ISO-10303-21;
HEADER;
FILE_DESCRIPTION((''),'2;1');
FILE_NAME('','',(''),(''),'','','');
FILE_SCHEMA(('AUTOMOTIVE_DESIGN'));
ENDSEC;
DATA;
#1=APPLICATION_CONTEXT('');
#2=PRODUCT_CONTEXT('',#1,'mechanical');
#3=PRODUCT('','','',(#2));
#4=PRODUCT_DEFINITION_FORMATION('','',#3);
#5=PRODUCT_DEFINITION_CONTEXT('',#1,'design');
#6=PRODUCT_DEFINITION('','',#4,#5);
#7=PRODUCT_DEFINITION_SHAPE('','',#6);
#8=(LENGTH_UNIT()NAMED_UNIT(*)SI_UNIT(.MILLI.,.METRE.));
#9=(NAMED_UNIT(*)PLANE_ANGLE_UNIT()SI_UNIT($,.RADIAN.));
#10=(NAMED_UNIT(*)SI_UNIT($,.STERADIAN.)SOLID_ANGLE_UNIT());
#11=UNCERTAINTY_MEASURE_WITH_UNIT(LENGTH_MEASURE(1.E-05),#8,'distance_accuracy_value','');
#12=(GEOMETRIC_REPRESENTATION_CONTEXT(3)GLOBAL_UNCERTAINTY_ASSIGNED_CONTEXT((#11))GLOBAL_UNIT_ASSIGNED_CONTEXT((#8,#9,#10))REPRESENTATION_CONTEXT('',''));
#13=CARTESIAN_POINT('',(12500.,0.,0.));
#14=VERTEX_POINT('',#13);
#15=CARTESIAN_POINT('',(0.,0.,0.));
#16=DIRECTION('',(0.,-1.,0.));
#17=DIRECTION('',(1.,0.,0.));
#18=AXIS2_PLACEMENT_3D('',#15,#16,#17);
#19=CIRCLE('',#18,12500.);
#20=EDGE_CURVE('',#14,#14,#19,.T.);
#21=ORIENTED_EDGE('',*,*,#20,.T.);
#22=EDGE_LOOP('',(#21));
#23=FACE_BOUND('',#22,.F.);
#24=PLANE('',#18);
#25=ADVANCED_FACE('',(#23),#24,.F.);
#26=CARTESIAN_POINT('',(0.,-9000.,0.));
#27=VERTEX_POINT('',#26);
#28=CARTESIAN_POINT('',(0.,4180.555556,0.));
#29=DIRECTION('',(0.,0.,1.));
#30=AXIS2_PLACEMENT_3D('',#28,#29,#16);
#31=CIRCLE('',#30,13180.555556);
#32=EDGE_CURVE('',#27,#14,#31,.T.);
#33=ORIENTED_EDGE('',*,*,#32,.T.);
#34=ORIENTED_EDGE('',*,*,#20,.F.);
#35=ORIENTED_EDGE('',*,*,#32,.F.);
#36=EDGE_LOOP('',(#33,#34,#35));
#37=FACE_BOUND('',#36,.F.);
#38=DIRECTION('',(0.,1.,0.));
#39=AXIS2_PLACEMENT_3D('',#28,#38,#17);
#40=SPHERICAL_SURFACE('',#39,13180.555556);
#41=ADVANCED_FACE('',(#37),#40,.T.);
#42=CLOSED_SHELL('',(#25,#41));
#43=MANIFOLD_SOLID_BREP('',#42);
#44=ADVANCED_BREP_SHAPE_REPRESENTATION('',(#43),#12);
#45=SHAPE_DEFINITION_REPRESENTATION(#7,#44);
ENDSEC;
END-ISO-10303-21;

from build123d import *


# Not quite as in the source:
# - the program builds the solid bodies; features that only make, move or delete a surface that nothing else refers to are left out


with BuildPart() as f2:
    # F0 (on Top) → F2 (revolve)
    with BuildSketch(Plane.XY):
        with BuildLine():
            Line((12500, 0), (0, 0))
            Line((0, 0), (0, -8500))
            ThreePointArc((0, -8500), (7558.1082289155, -6173.6885719345), (12500, 0))
        make_face()
        with BuildLine():
            ThreePointArc((12500, 0), (7558.1082289155, -6173.6885719345), (0, -8500))
            Line((0, -8500), (0, -9000))
            ThreePointArc((0, -9000), (7701.4609003747, -6515.9179171871), (12500, 0))
        make_face()
    revolve(axis=Axis((0, -4250, 0), (0, -1, 0)))


solid = f2.part
